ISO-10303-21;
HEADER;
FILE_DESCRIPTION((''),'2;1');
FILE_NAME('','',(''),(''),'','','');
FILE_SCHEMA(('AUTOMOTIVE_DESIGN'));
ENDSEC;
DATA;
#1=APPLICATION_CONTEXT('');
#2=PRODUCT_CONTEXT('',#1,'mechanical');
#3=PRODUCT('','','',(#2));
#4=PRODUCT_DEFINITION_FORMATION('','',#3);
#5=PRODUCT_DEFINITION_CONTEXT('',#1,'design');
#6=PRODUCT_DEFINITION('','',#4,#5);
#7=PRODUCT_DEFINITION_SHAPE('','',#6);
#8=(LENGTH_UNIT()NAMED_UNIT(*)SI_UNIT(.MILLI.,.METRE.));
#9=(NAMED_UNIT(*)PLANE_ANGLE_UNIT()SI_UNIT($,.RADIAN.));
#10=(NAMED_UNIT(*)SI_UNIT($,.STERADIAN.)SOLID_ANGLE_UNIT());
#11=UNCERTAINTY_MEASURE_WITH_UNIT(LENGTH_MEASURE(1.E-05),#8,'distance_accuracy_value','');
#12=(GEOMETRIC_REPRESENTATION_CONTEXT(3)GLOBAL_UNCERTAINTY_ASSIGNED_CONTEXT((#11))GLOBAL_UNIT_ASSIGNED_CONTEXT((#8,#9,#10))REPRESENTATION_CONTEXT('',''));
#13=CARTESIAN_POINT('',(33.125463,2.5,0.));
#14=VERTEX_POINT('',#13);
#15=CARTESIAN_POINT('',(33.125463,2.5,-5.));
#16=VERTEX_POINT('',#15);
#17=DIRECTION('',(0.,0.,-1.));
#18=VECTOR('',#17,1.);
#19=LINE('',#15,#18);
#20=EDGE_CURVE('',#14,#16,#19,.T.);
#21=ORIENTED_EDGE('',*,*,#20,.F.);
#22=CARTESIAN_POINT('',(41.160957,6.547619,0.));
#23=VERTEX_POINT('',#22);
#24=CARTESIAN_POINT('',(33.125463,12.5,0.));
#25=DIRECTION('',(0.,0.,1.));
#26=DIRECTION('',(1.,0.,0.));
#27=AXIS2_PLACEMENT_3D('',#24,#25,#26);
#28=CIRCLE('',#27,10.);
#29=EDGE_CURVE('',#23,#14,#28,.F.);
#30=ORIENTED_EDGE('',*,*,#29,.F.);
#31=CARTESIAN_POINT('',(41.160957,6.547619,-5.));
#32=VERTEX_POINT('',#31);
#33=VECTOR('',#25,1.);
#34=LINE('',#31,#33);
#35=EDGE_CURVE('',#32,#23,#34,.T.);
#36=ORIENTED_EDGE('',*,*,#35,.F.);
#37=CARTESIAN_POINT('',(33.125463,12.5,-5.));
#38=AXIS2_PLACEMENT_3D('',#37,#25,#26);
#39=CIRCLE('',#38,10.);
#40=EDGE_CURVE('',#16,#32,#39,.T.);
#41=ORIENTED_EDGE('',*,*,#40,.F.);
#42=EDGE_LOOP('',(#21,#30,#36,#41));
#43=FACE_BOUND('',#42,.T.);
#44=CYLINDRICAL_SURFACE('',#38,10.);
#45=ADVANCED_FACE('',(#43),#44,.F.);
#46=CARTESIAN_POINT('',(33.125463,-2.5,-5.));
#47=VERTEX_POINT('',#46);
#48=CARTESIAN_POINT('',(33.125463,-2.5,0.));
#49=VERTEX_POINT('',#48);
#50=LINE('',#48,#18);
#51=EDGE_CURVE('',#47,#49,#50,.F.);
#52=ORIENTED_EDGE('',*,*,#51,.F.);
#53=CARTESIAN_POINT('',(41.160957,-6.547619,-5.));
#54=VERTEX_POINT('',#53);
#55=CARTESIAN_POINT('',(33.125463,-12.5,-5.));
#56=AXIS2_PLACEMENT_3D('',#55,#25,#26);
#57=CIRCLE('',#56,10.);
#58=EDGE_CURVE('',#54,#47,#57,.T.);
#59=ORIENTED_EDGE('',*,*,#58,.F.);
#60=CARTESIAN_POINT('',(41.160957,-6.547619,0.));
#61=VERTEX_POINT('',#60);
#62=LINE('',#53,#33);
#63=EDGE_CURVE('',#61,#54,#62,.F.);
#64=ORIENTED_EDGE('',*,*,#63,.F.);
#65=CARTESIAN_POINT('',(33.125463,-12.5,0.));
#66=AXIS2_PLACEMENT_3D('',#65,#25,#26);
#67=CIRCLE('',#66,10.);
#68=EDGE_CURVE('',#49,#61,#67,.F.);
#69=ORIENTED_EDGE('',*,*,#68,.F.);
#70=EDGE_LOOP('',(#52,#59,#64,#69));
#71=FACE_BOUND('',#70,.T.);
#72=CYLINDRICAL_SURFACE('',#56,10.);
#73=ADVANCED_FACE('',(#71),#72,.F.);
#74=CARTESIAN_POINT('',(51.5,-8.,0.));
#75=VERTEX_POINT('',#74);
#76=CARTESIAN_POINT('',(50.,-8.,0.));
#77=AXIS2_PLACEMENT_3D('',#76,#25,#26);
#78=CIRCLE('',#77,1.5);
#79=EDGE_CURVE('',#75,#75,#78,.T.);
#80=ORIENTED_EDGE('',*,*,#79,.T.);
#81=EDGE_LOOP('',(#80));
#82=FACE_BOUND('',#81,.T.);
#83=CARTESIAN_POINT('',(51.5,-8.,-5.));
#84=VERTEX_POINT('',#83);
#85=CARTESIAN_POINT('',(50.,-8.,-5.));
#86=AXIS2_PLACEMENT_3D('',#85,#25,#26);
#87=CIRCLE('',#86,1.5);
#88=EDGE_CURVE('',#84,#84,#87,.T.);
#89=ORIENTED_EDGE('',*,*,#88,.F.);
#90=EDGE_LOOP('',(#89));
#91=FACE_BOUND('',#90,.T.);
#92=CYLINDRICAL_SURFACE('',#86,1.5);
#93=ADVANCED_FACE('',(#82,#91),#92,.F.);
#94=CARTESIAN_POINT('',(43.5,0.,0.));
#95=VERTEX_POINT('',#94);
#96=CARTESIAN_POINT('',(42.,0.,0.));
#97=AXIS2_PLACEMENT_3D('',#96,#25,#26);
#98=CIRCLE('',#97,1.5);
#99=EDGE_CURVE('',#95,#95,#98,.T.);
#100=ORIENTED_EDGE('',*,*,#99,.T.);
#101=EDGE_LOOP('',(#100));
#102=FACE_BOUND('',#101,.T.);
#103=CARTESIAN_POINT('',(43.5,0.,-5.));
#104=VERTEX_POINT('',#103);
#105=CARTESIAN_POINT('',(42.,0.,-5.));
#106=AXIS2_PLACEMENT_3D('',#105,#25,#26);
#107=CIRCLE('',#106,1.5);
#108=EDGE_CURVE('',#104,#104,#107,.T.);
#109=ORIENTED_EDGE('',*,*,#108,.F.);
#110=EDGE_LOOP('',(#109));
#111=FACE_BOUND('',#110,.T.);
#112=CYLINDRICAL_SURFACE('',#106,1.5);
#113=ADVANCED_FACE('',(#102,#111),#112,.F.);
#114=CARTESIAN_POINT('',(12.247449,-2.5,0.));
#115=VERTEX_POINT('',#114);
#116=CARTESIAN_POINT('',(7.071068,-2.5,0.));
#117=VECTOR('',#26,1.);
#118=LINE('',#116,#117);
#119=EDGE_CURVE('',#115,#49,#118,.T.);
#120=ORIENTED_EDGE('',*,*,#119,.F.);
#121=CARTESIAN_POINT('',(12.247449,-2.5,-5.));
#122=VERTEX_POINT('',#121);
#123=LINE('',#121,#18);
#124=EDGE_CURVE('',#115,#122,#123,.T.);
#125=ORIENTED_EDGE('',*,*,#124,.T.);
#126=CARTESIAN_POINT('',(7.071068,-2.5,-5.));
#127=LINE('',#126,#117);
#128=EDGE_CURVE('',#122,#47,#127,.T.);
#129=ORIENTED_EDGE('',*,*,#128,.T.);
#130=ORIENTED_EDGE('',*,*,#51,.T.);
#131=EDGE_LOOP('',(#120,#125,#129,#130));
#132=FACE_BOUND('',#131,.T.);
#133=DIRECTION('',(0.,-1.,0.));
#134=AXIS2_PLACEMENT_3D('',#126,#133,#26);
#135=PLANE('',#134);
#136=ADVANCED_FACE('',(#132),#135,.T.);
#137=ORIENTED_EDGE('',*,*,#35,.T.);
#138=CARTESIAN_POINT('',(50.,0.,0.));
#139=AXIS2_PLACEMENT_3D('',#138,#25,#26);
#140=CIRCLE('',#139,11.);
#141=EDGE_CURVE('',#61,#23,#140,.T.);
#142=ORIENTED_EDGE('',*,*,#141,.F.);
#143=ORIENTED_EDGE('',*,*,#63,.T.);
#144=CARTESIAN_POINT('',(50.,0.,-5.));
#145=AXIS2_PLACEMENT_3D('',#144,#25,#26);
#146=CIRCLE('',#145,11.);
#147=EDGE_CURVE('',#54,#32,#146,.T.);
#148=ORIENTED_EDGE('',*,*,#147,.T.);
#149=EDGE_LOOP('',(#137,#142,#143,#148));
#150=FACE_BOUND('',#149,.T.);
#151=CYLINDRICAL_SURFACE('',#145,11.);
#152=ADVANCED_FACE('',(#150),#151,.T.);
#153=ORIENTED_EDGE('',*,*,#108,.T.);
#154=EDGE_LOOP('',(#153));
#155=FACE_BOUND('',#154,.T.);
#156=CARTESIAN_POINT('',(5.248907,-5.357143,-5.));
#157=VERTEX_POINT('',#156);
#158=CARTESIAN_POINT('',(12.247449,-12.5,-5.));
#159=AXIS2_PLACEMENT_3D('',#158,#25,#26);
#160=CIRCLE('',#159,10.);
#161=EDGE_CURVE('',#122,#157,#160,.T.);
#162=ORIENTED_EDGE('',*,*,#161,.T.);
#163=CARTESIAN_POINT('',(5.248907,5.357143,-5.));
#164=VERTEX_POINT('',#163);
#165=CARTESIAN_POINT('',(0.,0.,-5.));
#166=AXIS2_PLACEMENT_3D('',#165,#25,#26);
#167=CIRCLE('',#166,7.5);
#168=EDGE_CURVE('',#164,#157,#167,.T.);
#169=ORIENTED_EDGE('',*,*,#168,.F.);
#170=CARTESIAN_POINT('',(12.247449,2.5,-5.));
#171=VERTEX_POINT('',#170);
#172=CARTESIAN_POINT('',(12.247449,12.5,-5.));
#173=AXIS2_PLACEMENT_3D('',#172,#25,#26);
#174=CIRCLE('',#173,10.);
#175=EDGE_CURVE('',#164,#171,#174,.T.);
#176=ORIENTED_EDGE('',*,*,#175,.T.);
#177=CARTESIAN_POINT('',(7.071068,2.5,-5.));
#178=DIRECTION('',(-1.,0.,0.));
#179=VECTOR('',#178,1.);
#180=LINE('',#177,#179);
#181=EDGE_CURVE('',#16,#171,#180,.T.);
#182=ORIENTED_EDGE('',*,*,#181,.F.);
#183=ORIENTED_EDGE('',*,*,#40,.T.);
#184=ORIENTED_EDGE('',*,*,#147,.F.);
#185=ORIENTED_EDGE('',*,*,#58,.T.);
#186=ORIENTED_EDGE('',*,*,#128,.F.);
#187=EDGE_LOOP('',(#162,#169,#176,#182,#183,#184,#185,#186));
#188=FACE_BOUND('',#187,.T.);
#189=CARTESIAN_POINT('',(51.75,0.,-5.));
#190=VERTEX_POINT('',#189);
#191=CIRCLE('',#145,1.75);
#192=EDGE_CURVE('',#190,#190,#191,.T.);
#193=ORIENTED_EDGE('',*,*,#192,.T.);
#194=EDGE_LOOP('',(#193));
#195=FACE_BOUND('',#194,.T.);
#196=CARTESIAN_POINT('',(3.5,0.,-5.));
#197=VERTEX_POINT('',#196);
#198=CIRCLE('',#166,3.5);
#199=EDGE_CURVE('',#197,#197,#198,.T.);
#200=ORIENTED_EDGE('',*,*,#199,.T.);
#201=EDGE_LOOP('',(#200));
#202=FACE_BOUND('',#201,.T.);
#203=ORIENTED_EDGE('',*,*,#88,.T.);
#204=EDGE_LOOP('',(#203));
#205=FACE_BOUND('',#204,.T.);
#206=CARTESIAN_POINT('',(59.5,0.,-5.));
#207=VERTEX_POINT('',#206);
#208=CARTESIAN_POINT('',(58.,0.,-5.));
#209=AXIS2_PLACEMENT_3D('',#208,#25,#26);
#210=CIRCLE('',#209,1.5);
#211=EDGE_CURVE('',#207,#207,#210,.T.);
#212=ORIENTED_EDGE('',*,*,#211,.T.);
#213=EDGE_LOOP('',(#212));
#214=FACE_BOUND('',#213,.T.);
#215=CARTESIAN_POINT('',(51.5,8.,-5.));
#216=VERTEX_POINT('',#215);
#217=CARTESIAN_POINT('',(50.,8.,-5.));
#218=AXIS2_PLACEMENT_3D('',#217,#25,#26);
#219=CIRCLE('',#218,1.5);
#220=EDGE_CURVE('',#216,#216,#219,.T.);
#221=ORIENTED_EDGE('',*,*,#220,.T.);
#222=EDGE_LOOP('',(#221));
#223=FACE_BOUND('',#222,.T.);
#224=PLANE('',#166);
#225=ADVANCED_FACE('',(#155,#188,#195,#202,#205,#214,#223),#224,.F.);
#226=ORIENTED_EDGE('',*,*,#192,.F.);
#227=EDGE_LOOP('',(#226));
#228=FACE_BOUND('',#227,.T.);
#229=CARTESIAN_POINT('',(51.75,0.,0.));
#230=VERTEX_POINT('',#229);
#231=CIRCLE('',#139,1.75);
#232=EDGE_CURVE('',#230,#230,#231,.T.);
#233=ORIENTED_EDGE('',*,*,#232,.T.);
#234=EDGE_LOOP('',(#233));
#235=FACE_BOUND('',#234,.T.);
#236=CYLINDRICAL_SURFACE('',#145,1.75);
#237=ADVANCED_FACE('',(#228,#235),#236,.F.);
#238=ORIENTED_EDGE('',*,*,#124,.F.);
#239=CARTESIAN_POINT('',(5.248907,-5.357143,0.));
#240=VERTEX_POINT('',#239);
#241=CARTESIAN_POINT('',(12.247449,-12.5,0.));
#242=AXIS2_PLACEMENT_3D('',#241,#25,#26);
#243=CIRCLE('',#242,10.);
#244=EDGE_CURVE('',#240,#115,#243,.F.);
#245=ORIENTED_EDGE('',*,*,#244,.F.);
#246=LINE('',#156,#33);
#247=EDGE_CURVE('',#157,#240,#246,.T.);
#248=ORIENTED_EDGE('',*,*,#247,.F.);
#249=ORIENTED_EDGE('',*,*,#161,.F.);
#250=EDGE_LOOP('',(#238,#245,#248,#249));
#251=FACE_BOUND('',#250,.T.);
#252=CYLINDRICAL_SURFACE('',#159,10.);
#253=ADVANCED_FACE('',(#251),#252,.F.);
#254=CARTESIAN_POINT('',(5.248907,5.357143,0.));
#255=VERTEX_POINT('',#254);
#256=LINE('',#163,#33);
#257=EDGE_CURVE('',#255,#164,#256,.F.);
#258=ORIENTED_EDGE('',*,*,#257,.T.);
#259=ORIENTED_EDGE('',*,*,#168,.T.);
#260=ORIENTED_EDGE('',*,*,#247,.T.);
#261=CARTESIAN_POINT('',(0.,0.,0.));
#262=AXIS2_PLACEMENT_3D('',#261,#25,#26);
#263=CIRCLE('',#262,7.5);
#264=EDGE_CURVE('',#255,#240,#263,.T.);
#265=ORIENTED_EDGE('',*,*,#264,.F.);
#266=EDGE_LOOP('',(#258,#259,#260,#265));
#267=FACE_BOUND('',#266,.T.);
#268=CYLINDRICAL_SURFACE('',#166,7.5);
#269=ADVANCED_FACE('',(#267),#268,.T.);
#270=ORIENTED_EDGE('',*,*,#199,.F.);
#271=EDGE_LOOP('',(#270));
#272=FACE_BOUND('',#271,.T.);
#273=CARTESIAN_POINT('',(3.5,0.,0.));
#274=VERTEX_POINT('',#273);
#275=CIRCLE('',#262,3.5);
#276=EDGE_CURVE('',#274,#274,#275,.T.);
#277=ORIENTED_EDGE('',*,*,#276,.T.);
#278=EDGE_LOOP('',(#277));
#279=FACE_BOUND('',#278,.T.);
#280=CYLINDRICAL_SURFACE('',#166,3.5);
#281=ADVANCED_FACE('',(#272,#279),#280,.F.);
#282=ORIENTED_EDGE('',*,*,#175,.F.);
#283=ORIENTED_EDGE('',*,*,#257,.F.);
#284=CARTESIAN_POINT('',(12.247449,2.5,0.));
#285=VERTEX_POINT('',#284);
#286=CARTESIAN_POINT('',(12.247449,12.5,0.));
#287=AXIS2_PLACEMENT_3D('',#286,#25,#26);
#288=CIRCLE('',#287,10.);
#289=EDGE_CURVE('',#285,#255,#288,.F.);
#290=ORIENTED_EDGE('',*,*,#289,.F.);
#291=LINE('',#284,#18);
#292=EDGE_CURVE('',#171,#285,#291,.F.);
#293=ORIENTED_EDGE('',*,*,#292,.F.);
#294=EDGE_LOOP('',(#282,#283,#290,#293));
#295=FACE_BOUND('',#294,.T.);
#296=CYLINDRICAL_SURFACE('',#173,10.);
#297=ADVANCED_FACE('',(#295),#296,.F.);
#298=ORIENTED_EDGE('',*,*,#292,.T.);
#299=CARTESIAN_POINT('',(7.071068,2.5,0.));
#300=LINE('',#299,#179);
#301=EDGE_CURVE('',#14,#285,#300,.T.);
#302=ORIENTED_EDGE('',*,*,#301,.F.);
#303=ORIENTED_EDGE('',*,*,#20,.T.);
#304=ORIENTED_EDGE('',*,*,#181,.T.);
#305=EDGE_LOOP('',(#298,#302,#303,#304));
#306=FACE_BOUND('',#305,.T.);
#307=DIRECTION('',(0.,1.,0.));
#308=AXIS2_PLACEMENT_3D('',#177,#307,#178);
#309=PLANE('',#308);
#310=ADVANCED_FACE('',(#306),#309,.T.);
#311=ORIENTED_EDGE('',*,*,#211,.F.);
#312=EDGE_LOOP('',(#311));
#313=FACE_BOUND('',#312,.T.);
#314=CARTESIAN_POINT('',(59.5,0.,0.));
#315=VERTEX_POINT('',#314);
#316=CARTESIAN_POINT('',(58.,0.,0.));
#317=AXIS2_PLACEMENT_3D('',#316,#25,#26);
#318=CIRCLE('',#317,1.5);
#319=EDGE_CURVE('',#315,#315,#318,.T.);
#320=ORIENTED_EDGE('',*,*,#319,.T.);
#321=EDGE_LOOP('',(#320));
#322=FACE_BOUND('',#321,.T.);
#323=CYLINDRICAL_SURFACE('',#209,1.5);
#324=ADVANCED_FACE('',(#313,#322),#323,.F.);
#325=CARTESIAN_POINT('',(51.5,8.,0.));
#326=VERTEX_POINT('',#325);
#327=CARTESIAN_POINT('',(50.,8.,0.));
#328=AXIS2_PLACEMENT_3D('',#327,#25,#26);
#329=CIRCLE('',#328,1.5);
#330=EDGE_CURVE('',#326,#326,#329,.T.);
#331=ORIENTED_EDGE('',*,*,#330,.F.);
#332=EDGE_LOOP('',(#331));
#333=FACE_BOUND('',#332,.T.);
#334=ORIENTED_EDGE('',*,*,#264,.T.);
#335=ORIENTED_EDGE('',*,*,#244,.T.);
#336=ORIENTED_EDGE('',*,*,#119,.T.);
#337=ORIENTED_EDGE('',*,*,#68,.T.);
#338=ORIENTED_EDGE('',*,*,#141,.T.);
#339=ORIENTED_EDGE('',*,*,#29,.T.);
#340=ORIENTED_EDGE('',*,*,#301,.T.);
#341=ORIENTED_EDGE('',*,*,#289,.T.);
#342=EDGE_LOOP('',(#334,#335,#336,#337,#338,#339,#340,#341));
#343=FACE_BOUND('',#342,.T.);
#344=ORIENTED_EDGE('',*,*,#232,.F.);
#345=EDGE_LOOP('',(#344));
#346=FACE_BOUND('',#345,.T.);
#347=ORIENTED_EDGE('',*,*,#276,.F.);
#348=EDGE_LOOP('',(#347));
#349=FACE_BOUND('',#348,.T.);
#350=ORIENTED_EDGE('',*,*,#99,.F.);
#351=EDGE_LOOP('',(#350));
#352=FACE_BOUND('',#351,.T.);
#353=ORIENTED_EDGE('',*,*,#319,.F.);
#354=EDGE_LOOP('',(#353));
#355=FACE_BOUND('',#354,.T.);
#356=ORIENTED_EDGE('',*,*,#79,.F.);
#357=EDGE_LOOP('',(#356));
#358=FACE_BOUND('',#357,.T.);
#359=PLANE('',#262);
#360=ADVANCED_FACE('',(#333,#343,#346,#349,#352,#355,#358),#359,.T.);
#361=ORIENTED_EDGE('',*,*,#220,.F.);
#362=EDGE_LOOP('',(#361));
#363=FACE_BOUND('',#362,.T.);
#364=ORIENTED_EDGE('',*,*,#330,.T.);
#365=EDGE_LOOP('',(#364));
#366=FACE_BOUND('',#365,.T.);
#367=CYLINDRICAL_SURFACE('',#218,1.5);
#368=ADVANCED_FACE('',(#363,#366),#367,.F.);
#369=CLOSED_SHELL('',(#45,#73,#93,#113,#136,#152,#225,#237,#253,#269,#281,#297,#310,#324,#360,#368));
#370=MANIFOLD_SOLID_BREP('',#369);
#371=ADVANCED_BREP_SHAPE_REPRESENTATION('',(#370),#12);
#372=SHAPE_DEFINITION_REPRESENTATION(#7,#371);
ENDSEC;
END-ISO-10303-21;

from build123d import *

# Parameters (mm, degrees)
SKETCH1_R          = 3.5
SKETCH1_R_2        = 1.5
SKETCH1_R_3        = 1.75
BASE_FLANGE1_DEPTH = 5
FILLET1_R          = 10


# Sheet-metal steps are written as plain solids
with BuildPart() as part:
    # Sketch1 → Base-Flange1 (new body)
    with BuildSketch(Plane.XY):
        with BuildLine():
            Line((7.071067812, 2.5), (39.287857357, 2.5))
            ThreePointArc((39.287857357, 2.5), (61, 0), (39.287857357, -2.5))
            Line((39.287857357, -2.5), (7.071067812, -2.5))
            ThreePointArc((7.071067812, -2.5), (-7.5, 0), (7.071067812, 2.5))
        make_face()
        Circle(SKETCH1_R, mode=Mode.SUBTRACT)
        with Locations((50, 8)):
            Circle(SKETCH1_R_2, mode=Mode.SUBTRACT)
        with Locations((58, 0)):
            Circle(SKETCH1_R_2, mode=Mode.SUBTRACT)
        with Locations((50, -8)):
            Circle(SKETCH1_R_2, mode=Mode.SUBTRACT)
        with Locations((42, 0)):
            Circle(SKETCH1_R_2, mode=Mode.SUBTRACT)
        with Locations((50, 0)):
            Circle(SKETCH1_R_3, mode=Mode.SUBTRACT)
    extrude(amount=-BASE_FLANGE1_DEPTH)

    # Fillet1
    fillet1_edges = [part.edges().sort_by_distance(p)[0] for p in [
        (7.071067812, 2.5, -2.5),
        (39.287857357, 2.5, -2.5),
        (39.287857357, -2.5, -2.5),
        (7.071067812, -2.5, -2.5),
    ]]
    fillet(fillet1_edges, radius=FILLET1_R)


solid = part.part
